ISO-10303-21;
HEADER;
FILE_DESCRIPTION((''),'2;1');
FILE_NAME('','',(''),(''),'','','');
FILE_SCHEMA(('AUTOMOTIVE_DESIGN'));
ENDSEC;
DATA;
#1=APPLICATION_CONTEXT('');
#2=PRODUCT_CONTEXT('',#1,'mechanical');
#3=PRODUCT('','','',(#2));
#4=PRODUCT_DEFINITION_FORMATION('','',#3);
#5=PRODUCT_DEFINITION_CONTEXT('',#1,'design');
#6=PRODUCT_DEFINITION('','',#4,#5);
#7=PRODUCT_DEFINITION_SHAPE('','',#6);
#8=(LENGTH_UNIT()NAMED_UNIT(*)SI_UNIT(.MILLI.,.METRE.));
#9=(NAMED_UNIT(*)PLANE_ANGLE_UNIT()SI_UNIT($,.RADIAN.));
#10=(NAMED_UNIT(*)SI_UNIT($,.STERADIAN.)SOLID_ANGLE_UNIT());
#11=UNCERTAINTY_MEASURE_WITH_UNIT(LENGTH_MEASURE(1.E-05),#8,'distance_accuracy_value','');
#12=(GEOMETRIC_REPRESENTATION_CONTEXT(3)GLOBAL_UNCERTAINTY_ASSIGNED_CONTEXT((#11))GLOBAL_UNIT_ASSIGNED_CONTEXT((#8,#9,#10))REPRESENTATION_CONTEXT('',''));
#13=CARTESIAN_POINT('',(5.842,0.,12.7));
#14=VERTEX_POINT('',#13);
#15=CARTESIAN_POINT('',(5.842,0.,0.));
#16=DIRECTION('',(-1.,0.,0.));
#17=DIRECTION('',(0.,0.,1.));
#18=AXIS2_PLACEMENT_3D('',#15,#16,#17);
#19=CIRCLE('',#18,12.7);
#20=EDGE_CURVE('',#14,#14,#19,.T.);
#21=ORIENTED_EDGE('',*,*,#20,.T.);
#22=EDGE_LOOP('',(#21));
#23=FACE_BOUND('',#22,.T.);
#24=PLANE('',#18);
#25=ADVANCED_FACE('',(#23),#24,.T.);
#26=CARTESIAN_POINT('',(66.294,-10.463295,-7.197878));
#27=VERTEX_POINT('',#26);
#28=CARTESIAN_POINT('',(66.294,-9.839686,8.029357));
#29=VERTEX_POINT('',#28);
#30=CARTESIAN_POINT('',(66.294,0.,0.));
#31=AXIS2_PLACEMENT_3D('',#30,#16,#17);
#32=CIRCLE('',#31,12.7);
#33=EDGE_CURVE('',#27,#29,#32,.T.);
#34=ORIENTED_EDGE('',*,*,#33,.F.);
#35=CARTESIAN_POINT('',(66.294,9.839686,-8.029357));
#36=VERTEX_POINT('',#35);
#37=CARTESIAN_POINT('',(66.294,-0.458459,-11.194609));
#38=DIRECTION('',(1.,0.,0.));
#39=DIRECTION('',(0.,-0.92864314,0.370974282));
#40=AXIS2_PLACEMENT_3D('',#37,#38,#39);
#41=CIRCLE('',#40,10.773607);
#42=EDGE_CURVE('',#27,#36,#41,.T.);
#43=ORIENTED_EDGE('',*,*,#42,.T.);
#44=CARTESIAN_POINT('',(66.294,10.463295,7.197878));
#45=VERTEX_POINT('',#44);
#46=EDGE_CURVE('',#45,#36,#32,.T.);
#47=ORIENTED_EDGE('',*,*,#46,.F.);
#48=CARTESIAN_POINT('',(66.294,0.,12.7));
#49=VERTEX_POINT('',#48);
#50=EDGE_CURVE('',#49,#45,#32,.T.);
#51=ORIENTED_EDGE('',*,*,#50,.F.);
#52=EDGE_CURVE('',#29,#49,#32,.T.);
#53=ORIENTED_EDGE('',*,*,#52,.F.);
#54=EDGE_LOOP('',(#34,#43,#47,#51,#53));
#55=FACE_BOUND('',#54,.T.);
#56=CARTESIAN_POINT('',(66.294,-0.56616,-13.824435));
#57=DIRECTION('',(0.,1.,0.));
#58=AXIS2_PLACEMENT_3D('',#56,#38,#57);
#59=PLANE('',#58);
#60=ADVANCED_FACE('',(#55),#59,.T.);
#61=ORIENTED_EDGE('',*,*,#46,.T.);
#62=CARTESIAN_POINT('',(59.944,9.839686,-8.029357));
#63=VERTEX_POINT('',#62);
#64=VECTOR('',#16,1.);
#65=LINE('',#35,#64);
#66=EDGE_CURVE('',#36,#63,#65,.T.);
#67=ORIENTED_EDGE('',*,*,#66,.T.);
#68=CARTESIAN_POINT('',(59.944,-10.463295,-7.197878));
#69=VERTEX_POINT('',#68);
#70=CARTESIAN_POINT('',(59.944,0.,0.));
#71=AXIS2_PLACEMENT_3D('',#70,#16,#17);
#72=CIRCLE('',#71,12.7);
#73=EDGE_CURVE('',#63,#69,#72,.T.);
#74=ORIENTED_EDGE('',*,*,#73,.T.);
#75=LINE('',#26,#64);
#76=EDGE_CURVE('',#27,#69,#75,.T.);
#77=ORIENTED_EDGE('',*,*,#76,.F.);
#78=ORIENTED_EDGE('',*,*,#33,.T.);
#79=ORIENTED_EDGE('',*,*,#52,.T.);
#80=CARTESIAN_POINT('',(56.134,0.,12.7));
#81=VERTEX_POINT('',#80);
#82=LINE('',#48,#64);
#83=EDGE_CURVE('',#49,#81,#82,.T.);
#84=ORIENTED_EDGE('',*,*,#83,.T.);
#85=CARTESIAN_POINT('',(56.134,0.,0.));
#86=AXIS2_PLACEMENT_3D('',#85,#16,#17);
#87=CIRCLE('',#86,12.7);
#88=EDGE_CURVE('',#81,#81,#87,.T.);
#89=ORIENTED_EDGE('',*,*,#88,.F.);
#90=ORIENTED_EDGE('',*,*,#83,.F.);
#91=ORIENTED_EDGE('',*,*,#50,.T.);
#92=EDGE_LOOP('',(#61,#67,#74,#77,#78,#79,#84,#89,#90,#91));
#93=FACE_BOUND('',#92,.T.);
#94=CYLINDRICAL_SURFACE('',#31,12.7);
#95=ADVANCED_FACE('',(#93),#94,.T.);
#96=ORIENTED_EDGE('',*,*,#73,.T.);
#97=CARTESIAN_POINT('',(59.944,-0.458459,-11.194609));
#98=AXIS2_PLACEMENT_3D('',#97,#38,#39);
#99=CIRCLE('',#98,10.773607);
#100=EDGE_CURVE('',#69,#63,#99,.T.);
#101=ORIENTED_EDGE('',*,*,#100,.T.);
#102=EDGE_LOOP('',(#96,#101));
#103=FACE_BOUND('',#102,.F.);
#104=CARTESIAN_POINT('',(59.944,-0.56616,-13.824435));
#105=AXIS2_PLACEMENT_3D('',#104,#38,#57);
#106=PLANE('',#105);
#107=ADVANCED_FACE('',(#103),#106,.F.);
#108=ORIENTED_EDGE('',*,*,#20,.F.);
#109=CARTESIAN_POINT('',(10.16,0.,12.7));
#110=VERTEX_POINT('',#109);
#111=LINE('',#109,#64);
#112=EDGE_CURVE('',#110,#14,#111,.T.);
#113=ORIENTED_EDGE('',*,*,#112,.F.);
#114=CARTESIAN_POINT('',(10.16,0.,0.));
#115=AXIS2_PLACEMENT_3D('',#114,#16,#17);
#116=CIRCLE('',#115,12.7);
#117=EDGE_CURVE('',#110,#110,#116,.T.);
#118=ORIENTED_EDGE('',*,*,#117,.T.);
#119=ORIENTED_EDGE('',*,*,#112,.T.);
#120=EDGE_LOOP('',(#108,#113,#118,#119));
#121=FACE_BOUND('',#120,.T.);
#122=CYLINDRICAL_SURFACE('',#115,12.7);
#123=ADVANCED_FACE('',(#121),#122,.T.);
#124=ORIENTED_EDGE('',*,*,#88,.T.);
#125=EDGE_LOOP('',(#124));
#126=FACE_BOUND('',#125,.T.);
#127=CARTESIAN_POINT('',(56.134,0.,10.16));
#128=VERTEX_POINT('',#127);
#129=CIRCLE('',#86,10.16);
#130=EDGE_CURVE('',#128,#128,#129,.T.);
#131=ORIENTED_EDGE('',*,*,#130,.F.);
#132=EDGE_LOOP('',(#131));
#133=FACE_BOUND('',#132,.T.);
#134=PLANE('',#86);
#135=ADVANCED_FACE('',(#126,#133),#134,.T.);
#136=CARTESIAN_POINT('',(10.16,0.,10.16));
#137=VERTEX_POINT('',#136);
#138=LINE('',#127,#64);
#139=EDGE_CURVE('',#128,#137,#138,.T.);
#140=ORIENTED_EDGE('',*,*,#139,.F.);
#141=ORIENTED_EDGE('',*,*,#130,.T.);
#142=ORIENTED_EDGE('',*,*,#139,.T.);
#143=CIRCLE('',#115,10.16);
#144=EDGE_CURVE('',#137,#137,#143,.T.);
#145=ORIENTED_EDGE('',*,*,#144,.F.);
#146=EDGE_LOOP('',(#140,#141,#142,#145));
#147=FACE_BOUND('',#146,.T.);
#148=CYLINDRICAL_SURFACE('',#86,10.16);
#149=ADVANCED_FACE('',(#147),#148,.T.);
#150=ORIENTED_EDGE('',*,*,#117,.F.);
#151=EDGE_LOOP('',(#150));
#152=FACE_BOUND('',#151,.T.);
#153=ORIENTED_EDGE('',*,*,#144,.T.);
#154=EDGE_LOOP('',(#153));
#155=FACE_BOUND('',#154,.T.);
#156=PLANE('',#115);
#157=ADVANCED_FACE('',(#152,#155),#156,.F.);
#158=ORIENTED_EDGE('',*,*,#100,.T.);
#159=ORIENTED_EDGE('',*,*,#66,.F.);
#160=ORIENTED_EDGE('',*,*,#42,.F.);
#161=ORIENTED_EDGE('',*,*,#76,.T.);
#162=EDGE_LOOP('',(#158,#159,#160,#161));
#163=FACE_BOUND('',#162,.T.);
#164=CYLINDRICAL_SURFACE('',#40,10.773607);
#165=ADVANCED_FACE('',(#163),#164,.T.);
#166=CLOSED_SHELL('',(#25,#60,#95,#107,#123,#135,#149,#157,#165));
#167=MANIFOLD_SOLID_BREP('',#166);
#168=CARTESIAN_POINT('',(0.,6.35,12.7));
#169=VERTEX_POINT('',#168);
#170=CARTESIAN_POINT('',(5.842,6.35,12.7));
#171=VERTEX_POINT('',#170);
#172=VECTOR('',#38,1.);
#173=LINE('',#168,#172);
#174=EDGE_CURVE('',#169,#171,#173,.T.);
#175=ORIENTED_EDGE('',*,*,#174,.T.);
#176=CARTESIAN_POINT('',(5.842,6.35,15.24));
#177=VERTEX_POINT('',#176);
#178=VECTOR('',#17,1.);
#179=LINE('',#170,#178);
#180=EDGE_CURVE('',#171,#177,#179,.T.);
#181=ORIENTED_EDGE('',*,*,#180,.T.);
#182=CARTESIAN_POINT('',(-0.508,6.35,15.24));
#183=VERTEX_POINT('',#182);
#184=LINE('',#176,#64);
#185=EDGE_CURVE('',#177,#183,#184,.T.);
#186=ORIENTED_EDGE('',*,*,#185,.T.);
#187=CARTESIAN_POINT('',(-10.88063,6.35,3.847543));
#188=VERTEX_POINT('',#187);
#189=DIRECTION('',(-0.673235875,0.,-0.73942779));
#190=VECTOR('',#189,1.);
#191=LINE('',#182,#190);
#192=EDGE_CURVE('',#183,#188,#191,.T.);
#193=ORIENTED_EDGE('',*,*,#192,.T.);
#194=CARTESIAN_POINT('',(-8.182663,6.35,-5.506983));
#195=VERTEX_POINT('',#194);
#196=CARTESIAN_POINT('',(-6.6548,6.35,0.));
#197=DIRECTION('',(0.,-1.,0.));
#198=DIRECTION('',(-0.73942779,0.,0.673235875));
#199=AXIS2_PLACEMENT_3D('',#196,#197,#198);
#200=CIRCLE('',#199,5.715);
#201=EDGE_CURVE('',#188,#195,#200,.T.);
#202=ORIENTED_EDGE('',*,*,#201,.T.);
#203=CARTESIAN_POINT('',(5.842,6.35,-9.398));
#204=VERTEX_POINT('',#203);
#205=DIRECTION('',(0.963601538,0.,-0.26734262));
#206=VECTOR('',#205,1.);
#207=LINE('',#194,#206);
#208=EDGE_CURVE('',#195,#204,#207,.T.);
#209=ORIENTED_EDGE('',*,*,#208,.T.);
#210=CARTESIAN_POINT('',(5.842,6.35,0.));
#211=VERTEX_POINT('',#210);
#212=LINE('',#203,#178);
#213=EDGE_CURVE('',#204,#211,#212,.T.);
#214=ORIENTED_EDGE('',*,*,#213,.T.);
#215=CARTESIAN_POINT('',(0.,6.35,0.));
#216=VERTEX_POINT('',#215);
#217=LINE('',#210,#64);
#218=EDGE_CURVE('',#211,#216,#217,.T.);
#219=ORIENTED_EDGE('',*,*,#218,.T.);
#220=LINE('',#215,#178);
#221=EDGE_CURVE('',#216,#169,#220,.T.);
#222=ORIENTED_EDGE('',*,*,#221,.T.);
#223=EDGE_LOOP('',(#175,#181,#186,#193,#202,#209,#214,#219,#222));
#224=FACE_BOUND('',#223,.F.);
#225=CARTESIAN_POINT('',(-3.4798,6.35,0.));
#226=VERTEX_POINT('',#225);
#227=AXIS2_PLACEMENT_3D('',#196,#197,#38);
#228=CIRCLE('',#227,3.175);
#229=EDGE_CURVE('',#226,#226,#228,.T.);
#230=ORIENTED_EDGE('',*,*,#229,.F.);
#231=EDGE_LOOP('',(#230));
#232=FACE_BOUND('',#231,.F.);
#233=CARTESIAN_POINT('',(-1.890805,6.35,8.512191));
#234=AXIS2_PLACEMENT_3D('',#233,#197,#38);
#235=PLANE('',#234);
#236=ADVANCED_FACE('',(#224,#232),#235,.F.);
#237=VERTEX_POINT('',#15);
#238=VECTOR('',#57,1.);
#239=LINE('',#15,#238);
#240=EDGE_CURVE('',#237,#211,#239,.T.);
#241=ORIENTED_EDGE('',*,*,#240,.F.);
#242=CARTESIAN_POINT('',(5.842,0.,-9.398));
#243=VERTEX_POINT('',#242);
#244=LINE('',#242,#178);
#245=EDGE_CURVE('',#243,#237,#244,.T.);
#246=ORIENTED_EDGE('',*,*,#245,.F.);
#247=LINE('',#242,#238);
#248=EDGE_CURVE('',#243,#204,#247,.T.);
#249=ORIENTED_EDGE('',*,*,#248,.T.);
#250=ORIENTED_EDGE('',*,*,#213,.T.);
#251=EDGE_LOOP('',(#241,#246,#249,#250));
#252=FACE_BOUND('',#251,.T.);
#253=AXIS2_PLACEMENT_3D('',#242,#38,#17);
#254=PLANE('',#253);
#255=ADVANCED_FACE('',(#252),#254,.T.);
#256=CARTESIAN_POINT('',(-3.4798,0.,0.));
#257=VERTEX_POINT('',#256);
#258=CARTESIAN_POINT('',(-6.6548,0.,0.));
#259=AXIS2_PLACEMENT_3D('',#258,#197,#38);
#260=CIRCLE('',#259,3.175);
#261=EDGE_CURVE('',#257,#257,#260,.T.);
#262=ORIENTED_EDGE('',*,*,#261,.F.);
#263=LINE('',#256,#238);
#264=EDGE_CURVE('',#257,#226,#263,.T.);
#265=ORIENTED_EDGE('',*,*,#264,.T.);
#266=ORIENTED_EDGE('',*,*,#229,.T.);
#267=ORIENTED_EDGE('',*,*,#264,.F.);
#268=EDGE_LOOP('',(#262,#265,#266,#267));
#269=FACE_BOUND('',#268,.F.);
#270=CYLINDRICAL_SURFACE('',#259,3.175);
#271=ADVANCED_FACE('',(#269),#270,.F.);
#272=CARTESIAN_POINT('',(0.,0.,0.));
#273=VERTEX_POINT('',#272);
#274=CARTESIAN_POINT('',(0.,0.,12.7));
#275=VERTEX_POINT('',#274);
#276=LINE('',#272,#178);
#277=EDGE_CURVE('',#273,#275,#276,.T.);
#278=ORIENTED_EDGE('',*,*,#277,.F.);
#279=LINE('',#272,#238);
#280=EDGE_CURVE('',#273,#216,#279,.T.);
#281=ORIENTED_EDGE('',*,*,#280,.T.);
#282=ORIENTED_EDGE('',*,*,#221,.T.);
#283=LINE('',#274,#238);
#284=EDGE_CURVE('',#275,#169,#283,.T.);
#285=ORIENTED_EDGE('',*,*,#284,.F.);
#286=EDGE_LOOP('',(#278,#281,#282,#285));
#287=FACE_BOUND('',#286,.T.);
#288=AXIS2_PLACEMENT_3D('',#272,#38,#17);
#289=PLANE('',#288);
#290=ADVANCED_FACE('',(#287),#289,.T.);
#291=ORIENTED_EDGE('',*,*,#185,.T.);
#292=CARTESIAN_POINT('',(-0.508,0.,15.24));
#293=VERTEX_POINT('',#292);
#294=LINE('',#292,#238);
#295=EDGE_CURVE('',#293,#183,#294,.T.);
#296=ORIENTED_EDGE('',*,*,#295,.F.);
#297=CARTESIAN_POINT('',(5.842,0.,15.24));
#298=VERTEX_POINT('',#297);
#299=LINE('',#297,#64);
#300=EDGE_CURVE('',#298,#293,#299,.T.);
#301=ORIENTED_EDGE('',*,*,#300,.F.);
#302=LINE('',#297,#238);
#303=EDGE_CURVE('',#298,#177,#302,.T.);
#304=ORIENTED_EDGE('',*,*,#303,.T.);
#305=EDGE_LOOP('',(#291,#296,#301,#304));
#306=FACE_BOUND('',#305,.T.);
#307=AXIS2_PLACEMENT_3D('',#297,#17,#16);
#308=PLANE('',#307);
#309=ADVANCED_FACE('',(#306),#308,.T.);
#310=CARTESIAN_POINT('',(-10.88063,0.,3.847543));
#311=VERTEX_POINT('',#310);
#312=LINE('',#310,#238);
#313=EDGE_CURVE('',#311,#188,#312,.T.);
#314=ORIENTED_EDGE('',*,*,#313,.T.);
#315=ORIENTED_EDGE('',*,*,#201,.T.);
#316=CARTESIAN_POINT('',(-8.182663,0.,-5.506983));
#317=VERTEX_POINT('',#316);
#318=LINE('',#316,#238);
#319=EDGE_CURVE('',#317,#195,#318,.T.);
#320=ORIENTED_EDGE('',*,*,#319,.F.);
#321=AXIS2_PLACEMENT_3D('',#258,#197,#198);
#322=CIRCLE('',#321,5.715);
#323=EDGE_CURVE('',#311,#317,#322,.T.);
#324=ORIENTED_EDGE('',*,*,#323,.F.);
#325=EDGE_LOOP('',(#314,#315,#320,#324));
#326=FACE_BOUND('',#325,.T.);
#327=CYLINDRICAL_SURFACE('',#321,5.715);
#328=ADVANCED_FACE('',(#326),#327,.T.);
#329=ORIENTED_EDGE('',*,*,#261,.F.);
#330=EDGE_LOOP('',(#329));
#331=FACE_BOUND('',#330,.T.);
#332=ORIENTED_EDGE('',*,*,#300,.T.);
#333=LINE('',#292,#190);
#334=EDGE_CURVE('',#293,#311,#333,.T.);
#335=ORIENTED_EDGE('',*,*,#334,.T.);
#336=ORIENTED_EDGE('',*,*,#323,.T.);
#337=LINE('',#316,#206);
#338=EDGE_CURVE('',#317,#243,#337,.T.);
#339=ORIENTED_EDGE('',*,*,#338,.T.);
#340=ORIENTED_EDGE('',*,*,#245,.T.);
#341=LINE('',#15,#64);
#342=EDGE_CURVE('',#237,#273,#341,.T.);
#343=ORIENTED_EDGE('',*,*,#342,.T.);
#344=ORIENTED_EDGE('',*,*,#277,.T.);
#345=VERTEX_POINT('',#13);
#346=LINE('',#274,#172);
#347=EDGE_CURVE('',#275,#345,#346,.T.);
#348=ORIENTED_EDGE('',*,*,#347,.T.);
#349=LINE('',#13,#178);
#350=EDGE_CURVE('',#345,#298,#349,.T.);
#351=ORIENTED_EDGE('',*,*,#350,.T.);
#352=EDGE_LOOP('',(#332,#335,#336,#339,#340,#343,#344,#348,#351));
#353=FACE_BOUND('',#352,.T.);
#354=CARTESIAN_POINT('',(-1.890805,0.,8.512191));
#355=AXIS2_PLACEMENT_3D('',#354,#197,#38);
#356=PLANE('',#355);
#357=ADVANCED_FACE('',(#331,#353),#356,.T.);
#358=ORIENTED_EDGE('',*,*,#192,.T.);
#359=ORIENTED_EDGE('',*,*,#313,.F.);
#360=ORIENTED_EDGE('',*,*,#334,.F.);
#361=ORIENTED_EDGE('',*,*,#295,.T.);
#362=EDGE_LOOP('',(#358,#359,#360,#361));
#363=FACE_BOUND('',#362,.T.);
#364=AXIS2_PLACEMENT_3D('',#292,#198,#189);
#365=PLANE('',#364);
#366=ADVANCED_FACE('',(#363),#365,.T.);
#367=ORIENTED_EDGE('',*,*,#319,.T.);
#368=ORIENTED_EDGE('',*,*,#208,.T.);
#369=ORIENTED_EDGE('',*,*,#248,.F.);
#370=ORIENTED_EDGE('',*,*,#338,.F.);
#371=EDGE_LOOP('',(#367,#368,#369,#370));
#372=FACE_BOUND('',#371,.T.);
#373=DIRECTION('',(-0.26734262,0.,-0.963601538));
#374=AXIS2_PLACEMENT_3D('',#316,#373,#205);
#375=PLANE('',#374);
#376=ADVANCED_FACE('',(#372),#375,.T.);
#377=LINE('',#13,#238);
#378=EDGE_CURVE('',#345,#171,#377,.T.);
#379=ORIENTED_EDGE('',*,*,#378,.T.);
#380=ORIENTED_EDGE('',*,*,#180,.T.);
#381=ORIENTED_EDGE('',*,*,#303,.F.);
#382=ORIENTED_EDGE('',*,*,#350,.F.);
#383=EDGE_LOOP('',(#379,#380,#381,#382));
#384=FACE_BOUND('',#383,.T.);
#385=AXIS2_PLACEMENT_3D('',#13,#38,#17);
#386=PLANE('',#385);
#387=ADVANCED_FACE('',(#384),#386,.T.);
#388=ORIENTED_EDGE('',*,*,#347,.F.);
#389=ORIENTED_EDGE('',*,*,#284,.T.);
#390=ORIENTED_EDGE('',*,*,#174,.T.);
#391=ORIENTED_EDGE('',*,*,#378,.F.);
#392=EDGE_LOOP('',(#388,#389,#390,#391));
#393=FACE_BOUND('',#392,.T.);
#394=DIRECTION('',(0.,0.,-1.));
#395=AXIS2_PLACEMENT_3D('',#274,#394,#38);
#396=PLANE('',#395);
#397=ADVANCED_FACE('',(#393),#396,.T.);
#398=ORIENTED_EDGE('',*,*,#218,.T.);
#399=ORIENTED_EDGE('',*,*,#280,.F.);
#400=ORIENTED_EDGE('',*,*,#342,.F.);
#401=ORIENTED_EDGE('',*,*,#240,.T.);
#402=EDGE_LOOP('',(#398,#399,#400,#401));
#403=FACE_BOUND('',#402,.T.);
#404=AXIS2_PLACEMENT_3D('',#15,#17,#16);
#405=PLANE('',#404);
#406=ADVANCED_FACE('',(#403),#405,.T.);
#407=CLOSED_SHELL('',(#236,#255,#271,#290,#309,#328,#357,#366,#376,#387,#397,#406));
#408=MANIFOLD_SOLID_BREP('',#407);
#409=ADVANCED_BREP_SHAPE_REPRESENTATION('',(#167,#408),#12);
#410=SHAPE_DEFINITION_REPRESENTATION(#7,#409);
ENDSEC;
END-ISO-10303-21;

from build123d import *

# Parameters (mm, degrees)
F0_R     = 3.175
F1_DEPTH = 6.35
F5_DEPTH = 6.35


# Not quite as in the source:
# - a feature of the source that left no trace in its solid (it failed there, or was rolled back) is left out


with BuildPart() as f1:
    # F0 (on Front) → F1 (new body)
    with BuildSketch(Plane.XZ):
        with BuildLine():
            Line((-0.9398, 0), (0, 0))
            Line((0, 0), (0, 12.7))
            Line((0, 12.7), (5.842, 12.7))
            Line((5.842, 12.7), (5.842, 15.24))
            Line((5.842, 15.24), (-0.508, 15.24))
            Line((-0.508, 15.24), (-10.8806298187, 3.8475430269))
            ThreePointArc((-10.8806298187, 3.8475430269), (-4.5919612295, 5.3297205562), (-0.9398, 0))
        make_face()
        with BuildLine():
            ThreePointArc((-8.1826630726, -5.5069827884), (-3.1957909266, -4.5493385486), (-0.9398, 0))
            ThreePointArc((-0.9398, 0), (-4.5919612295, 5.3297205562), (-10.8806298187, 3.8475430269))
            ThreePointArc((-10.8806298187, 3.8475430269), (-12.1459778134, -1.5837270034), (-8.1826630726, -5.5069827884))
        make_face()
        with Locations((-6.6548, 0)):
            Circle(F0_R, mode=Mode.SUBTRACT)
        with BuildLine():
            Line((5.842, 0), (0, 0))
            Line((0, 0), (-0.9398, 0))
            ThreePointArc((-0.9398, 0), (-3.1957909266, -4.5493385486), (-8.1826630726, -5.5069827884))
            Line((-8.1826630726, -5.5069827884), (5.842, -9.398))
            Line((5.842, -9.398), (5.842, 0))
        make_face()
    extrude(amount=-F1_DEPTH)


with BuildPart() as f3:
    # F0 (on Front) → F3 (revolve)
    with BuildSketch(Plane.XZ):
        Polygon((5.842, 12.7), (5.842, 0), (66.294, 0), (66.294, 12.7), (56.134, 12.7), (56.134, 10.16), (10.16, 10.16), (10.16, 12.7), align=None)
    revolve(axis=Axis((33.147, 0, 0), (-1, 0, 0)))

    # F4 (on face) → F5 (join)
    with BuildSketch(Plane.YZ.offset(66.294)):
        with BuildLine():
            ThreePointArc((9.8396858807, -8.0293574942), (-0.5196744669, -12.6893632011), (-10.463295241, -7.1978783471))
            ThreePointArc((-10.463295241, -7.1978783471), (-0.8993069074, -21.9591931184), (9.8396858807, -8.0293574942))
        make_face()
        with BuildLine():
            Line((-9.8396858807, 8.0293574942), (-10.463295241, -7.1978783471))
            ThreePointArc((-10.463295241, -7.1978783471), (-0.5196744669, -12.6893632011), (9.8396858807, -8.0293574942))
            Line((9.8396858807, -8.0293574942), (10.463295241, 7.1978783471))
            Line((10.463295241, 7.1978783471), (-9.8396858807, 8.0293574942))
        make_face()
    extrude(amount=-F5_DEPTH)


solid = Compound([f1.part, f3.part])
